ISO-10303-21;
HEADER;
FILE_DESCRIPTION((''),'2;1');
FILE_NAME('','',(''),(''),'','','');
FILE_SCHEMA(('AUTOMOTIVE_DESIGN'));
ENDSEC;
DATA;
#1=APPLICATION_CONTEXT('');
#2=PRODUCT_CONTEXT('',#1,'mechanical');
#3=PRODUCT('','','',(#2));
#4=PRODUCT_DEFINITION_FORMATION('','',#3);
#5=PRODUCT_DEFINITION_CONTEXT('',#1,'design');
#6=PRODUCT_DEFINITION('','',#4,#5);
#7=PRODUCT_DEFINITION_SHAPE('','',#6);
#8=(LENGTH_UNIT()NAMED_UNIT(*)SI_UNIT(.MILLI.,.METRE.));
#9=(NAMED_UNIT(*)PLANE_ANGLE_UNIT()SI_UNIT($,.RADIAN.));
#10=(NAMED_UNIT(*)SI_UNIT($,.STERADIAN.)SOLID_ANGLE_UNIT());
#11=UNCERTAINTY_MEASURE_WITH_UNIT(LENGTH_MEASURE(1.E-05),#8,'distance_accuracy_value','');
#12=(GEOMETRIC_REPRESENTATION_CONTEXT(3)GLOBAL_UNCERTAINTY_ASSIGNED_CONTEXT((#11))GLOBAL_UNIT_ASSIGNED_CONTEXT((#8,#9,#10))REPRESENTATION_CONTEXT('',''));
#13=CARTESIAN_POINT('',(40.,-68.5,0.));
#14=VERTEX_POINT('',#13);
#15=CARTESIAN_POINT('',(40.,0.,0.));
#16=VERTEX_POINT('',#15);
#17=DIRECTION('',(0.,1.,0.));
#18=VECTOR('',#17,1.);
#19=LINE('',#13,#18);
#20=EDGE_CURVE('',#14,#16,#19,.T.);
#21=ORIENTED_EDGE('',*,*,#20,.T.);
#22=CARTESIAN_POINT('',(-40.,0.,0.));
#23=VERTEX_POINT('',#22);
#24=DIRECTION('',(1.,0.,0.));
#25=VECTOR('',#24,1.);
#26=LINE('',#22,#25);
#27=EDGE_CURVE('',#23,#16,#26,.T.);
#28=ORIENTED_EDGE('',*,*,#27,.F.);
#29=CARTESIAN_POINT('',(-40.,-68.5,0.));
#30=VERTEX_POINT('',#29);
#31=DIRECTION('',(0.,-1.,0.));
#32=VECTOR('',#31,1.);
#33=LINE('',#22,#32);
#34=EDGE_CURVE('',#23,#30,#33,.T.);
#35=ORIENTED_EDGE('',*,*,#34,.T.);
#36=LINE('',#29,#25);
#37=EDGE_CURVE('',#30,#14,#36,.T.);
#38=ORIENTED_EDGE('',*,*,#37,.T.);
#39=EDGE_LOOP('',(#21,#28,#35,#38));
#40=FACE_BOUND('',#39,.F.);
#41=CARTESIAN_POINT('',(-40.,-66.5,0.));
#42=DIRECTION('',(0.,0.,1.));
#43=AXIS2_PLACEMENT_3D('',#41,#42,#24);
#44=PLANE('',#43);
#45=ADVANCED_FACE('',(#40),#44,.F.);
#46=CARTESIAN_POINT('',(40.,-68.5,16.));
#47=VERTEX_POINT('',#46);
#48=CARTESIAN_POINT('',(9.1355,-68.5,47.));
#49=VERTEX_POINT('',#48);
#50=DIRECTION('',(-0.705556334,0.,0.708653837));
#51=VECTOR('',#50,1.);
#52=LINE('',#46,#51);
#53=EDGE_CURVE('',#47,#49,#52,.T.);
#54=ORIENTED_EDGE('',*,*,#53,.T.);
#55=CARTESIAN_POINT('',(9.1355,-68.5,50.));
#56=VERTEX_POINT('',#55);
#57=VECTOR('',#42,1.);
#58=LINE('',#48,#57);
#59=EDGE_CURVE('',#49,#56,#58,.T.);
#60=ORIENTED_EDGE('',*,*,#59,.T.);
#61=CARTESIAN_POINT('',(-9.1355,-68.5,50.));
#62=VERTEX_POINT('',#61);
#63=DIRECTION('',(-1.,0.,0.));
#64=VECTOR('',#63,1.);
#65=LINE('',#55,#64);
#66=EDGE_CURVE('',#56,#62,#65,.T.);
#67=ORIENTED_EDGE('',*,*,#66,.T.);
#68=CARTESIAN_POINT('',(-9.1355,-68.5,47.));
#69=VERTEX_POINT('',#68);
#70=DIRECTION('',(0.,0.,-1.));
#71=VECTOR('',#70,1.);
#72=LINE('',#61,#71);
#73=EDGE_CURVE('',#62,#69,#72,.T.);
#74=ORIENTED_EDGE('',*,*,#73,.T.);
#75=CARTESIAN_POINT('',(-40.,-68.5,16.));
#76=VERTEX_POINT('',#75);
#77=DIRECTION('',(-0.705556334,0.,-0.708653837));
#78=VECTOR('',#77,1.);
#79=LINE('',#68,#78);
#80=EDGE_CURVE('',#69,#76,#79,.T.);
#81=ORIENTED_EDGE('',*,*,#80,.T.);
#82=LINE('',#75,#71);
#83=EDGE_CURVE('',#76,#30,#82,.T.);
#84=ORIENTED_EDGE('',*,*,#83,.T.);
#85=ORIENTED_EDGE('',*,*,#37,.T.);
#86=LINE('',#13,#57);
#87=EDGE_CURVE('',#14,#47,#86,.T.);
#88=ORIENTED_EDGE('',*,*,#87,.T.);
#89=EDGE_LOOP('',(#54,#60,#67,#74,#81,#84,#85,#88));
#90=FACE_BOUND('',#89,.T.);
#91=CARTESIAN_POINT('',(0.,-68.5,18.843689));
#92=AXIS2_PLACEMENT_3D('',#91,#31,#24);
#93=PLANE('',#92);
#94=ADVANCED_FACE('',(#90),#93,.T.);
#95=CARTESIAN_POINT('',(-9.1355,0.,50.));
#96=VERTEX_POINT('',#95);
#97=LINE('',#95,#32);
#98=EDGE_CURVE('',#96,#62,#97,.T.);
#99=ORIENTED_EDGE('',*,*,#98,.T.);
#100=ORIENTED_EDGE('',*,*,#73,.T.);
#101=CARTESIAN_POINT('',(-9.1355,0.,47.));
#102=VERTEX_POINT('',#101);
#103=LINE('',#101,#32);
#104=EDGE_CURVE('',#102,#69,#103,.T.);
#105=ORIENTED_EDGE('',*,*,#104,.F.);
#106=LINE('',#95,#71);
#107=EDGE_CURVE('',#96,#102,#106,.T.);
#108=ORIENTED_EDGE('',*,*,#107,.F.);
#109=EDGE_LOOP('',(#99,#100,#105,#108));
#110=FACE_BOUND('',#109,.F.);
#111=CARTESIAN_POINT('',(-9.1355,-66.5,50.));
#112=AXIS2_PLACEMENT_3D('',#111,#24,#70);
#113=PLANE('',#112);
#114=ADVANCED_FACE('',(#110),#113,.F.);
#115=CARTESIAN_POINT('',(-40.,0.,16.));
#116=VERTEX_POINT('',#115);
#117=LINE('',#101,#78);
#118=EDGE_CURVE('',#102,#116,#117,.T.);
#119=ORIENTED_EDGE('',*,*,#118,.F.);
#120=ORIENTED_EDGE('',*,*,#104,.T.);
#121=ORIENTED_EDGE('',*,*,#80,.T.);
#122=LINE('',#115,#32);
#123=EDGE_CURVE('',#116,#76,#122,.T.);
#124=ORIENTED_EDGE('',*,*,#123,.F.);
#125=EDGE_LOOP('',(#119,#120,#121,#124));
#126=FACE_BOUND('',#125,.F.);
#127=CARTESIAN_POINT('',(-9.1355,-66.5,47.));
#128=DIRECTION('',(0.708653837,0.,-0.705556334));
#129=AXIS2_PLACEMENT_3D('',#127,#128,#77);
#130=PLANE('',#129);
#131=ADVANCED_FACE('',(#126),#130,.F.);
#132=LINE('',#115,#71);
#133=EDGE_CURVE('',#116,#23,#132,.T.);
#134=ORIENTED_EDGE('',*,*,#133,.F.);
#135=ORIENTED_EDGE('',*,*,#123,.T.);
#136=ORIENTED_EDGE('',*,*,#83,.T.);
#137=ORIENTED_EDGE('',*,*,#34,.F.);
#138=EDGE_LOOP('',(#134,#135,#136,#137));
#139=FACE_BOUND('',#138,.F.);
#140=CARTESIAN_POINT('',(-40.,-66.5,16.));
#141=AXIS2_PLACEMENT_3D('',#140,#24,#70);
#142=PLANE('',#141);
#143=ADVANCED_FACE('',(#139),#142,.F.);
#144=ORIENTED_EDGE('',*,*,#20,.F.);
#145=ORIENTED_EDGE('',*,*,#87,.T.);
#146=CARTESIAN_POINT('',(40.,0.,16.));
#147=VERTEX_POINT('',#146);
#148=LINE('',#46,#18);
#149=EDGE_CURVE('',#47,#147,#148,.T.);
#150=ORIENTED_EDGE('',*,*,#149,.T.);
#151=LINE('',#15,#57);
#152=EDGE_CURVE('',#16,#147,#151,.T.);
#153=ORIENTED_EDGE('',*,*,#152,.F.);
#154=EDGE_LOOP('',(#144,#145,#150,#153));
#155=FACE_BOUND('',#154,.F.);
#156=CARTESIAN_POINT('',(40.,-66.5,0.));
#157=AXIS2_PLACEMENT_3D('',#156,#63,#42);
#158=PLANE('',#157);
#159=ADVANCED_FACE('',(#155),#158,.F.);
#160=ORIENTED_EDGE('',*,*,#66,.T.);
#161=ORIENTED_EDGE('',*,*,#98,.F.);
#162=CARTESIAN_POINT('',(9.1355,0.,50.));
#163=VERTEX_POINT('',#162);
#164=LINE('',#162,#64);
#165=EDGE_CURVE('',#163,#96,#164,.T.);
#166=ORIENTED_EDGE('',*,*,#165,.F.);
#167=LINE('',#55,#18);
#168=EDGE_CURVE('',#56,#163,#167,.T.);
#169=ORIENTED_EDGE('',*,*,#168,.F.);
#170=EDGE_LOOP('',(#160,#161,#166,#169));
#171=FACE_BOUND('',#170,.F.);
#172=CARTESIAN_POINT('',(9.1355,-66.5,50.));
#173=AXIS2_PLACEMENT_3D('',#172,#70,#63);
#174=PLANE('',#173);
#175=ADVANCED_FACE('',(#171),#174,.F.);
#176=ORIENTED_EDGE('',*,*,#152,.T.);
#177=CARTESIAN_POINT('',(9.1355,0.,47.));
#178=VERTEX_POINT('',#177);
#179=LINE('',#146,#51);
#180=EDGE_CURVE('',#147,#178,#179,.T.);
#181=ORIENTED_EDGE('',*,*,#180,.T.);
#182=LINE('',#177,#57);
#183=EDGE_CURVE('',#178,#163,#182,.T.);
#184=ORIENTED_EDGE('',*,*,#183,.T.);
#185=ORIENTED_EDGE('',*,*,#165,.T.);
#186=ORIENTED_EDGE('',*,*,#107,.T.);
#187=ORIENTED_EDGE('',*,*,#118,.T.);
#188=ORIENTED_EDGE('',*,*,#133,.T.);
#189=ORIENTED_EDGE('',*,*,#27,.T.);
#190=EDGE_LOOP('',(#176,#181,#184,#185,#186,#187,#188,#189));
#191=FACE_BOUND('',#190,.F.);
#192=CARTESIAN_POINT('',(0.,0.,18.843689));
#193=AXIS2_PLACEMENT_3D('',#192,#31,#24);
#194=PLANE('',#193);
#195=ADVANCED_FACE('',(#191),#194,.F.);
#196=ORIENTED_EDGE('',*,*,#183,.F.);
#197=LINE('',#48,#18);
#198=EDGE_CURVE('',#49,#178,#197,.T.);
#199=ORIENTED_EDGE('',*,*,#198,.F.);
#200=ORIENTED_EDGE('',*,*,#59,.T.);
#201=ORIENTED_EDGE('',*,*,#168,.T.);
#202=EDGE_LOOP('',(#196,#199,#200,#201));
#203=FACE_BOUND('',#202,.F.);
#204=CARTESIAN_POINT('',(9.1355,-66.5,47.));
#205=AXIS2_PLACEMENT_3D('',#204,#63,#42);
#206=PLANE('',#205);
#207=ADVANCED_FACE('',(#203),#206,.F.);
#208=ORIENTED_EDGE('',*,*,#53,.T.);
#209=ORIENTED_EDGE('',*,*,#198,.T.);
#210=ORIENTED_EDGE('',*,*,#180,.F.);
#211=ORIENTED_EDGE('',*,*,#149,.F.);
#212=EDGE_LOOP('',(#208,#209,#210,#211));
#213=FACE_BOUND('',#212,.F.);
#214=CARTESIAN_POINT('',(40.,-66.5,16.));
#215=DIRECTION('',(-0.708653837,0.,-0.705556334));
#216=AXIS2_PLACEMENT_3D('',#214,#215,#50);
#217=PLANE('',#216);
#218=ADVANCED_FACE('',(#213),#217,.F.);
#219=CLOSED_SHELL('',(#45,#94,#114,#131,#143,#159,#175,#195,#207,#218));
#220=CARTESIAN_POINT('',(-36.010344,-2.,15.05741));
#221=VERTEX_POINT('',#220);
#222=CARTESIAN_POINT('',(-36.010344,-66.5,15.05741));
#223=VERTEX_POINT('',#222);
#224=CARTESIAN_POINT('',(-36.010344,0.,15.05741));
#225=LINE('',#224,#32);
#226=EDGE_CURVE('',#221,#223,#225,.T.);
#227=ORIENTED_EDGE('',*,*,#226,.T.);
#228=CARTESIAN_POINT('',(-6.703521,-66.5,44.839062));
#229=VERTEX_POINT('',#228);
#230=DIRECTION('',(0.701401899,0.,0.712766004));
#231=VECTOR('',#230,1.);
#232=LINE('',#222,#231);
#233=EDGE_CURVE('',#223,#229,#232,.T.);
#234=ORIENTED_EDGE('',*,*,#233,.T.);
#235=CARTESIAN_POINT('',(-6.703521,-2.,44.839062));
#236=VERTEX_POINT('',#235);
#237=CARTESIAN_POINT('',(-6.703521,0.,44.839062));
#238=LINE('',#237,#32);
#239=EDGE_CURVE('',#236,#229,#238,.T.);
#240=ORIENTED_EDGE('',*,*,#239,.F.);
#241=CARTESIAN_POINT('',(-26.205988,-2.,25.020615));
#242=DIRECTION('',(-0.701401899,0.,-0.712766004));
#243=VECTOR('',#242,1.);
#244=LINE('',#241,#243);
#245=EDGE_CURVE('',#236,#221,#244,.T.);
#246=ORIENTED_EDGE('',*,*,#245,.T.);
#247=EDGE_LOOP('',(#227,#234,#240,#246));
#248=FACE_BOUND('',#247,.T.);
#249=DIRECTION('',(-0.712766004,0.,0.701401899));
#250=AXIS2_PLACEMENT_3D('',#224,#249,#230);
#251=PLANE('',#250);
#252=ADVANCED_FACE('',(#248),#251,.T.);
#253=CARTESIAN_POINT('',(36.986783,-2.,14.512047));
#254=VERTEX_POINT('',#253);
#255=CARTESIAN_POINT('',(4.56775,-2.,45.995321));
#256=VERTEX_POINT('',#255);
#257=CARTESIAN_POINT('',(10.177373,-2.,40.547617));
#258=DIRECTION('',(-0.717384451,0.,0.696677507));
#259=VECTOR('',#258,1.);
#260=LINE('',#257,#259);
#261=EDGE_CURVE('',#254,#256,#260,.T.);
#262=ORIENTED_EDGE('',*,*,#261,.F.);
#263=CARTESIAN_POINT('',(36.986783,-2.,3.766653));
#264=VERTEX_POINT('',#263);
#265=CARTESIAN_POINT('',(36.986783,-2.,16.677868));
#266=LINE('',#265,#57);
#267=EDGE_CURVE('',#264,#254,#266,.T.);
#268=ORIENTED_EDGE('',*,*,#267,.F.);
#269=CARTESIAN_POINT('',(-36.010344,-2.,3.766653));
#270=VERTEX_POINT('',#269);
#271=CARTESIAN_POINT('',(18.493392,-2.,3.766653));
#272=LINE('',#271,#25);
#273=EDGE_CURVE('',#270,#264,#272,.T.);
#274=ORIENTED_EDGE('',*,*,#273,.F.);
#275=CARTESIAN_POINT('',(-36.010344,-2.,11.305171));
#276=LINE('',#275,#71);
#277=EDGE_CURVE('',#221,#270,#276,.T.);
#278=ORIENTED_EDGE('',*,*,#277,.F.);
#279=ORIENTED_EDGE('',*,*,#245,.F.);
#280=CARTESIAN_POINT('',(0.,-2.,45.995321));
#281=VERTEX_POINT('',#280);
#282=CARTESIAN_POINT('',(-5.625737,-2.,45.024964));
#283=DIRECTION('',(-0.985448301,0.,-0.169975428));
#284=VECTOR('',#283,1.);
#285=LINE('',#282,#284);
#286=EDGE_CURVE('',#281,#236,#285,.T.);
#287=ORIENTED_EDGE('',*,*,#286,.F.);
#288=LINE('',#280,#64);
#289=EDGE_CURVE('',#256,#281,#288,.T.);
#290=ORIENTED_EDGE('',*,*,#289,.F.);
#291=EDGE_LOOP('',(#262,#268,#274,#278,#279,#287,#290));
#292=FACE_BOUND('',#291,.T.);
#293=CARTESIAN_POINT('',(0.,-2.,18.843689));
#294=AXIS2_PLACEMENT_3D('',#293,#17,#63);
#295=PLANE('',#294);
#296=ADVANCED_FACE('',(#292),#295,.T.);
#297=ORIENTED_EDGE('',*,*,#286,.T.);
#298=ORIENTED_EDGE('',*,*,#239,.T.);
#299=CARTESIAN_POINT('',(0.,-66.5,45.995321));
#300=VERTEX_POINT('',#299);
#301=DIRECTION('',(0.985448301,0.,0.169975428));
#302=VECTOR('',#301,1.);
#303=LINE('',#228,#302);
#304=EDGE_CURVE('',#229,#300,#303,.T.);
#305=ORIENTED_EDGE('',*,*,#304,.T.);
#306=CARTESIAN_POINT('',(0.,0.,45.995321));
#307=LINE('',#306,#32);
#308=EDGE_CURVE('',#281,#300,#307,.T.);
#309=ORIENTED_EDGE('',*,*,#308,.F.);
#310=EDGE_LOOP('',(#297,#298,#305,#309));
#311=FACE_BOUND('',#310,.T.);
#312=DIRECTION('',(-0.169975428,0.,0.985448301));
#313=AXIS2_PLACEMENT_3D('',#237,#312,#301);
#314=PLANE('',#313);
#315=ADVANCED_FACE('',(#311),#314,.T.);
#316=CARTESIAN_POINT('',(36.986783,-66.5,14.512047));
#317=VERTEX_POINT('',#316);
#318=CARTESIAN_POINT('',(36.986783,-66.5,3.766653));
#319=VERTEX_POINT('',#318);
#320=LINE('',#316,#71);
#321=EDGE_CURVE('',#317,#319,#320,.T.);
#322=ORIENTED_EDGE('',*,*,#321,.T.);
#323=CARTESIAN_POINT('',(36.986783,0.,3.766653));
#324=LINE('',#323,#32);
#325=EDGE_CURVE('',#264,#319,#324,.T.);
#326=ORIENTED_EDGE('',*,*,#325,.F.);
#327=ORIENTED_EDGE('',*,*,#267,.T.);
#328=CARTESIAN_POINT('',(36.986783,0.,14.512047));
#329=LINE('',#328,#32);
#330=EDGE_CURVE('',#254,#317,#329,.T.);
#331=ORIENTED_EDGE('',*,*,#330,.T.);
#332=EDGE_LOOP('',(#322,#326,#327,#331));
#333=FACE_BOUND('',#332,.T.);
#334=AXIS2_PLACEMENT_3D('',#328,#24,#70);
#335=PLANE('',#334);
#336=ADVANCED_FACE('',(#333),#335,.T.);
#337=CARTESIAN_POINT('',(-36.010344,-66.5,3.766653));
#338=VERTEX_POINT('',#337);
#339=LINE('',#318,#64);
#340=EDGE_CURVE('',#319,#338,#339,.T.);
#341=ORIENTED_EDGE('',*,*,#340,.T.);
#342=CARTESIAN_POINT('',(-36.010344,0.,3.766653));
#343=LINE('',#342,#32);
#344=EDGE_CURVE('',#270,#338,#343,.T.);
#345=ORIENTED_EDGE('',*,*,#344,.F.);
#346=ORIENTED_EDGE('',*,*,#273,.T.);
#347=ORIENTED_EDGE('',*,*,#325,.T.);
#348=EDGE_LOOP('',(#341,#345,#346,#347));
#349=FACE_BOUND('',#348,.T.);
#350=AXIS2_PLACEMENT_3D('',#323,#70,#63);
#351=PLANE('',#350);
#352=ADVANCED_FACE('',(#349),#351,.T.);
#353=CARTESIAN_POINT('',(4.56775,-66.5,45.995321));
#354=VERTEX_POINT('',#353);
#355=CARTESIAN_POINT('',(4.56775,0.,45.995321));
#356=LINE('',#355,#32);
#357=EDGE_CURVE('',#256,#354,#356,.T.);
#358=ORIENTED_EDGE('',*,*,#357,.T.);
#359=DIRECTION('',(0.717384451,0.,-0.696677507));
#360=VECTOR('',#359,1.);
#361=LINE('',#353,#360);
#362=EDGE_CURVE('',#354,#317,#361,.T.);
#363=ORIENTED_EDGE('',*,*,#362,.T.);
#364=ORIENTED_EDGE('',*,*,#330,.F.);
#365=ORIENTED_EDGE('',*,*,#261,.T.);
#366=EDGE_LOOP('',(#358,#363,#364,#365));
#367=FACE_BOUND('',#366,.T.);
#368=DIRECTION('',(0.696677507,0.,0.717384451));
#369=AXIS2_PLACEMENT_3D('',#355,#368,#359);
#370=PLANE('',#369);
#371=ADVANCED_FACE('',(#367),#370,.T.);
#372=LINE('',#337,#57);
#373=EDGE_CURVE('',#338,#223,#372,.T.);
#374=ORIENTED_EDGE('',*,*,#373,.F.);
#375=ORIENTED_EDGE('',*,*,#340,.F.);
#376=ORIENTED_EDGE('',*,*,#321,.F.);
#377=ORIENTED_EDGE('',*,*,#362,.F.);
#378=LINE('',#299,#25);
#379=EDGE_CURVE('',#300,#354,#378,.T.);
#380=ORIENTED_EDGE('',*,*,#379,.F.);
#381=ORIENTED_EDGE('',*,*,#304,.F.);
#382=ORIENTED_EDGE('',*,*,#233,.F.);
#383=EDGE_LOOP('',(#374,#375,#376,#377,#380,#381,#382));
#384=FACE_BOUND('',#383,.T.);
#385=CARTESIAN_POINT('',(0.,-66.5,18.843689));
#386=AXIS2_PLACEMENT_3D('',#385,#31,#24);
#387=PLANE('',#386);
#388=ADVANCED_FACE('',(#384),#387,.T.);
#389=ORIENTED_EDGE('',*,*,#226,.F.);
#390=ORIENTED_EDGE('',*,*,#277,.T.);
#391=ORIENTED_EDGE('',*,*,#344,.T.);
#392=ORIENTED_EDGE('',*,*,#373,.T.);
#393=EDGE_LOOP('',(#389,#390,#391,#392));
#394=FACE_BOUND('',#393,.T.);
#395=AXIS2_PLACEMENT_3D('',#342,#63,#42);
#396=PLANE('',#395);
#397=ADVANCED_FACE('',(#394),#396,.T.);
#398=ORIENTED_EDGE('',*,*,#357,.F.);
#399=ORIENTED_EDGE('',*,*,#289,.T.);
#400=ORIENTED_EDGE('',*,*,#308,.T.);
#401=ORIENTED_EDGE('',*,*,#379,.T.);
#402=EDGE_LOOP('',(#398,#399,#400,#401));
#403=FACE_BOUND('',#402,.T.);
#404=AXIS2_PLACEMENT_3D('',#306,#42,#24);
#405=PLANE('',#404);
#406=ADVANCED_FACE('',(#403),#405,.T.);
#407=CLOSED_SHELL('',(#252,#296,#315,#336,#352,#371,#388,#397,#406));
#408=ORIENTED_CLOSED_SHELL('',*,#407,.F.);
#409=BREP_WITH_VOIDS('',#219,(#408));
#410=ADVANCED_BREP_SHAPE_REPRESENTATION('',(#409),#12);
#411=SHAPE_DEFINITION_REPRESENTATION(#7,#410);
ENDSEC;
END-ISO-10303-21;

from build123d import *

# Parameters (mm, degrees)
F1_DEPTH = 66.5
F3_DEPTH = 2
F5_DEPTH = 2


with BuildPart() as f1:
    # F0 (on Front) → F1 (new body)
    with BuildSketch(Plane.XZ):
        Polygon((9.1355, 50), (0, 50), (-9.1355, 50), (-9.1355, 47), (-40, 16), (-40, 0), (0, 0), (40, 0), (40, 16), (9.1355, 47), align=None)
        Polygon((-6.7035206594, 44.8390617967), (0, 45.9953211248), (4.56775, 45.9953211248), (36.9867831469, 14.5120471716), (36.9867831469, 3.7666528951), (-36.0103435814, 3.7666528951), (-36.0103435814, 15.0574101135), align=None, mode=Mode.SUBTRACT)
    extrude(amount=F1_DEPTH)

    # F2 (on face) → F3 (join)
    with BuildSketch(Plane.XZ.offset(66.5)):
        Polygon((9.1355, 50), (-9.1355, 50), (-9.1355, 47), (-40, 16), (-40, 0), (40, 0), (40, 16), (9.1355, 47), align=None)
    extrude(amount=F3_DEPTH)

    # F4 (on face) → F5 (join)
    with BuildSketch(Plane(origin=(0, 0, 0), x_dir=(-1, 0, 0), z_dir=(0, 1, 0))):
        Polygon((9.1355, 50), (-9.1355, 50), (-9.1355, 47), (-40, 16), (-40, 0), (40, 0), (40, 16), (9.1355, 47), align=None)
    extrude(amount=-F5_DEPTH)


solid = f1.part
